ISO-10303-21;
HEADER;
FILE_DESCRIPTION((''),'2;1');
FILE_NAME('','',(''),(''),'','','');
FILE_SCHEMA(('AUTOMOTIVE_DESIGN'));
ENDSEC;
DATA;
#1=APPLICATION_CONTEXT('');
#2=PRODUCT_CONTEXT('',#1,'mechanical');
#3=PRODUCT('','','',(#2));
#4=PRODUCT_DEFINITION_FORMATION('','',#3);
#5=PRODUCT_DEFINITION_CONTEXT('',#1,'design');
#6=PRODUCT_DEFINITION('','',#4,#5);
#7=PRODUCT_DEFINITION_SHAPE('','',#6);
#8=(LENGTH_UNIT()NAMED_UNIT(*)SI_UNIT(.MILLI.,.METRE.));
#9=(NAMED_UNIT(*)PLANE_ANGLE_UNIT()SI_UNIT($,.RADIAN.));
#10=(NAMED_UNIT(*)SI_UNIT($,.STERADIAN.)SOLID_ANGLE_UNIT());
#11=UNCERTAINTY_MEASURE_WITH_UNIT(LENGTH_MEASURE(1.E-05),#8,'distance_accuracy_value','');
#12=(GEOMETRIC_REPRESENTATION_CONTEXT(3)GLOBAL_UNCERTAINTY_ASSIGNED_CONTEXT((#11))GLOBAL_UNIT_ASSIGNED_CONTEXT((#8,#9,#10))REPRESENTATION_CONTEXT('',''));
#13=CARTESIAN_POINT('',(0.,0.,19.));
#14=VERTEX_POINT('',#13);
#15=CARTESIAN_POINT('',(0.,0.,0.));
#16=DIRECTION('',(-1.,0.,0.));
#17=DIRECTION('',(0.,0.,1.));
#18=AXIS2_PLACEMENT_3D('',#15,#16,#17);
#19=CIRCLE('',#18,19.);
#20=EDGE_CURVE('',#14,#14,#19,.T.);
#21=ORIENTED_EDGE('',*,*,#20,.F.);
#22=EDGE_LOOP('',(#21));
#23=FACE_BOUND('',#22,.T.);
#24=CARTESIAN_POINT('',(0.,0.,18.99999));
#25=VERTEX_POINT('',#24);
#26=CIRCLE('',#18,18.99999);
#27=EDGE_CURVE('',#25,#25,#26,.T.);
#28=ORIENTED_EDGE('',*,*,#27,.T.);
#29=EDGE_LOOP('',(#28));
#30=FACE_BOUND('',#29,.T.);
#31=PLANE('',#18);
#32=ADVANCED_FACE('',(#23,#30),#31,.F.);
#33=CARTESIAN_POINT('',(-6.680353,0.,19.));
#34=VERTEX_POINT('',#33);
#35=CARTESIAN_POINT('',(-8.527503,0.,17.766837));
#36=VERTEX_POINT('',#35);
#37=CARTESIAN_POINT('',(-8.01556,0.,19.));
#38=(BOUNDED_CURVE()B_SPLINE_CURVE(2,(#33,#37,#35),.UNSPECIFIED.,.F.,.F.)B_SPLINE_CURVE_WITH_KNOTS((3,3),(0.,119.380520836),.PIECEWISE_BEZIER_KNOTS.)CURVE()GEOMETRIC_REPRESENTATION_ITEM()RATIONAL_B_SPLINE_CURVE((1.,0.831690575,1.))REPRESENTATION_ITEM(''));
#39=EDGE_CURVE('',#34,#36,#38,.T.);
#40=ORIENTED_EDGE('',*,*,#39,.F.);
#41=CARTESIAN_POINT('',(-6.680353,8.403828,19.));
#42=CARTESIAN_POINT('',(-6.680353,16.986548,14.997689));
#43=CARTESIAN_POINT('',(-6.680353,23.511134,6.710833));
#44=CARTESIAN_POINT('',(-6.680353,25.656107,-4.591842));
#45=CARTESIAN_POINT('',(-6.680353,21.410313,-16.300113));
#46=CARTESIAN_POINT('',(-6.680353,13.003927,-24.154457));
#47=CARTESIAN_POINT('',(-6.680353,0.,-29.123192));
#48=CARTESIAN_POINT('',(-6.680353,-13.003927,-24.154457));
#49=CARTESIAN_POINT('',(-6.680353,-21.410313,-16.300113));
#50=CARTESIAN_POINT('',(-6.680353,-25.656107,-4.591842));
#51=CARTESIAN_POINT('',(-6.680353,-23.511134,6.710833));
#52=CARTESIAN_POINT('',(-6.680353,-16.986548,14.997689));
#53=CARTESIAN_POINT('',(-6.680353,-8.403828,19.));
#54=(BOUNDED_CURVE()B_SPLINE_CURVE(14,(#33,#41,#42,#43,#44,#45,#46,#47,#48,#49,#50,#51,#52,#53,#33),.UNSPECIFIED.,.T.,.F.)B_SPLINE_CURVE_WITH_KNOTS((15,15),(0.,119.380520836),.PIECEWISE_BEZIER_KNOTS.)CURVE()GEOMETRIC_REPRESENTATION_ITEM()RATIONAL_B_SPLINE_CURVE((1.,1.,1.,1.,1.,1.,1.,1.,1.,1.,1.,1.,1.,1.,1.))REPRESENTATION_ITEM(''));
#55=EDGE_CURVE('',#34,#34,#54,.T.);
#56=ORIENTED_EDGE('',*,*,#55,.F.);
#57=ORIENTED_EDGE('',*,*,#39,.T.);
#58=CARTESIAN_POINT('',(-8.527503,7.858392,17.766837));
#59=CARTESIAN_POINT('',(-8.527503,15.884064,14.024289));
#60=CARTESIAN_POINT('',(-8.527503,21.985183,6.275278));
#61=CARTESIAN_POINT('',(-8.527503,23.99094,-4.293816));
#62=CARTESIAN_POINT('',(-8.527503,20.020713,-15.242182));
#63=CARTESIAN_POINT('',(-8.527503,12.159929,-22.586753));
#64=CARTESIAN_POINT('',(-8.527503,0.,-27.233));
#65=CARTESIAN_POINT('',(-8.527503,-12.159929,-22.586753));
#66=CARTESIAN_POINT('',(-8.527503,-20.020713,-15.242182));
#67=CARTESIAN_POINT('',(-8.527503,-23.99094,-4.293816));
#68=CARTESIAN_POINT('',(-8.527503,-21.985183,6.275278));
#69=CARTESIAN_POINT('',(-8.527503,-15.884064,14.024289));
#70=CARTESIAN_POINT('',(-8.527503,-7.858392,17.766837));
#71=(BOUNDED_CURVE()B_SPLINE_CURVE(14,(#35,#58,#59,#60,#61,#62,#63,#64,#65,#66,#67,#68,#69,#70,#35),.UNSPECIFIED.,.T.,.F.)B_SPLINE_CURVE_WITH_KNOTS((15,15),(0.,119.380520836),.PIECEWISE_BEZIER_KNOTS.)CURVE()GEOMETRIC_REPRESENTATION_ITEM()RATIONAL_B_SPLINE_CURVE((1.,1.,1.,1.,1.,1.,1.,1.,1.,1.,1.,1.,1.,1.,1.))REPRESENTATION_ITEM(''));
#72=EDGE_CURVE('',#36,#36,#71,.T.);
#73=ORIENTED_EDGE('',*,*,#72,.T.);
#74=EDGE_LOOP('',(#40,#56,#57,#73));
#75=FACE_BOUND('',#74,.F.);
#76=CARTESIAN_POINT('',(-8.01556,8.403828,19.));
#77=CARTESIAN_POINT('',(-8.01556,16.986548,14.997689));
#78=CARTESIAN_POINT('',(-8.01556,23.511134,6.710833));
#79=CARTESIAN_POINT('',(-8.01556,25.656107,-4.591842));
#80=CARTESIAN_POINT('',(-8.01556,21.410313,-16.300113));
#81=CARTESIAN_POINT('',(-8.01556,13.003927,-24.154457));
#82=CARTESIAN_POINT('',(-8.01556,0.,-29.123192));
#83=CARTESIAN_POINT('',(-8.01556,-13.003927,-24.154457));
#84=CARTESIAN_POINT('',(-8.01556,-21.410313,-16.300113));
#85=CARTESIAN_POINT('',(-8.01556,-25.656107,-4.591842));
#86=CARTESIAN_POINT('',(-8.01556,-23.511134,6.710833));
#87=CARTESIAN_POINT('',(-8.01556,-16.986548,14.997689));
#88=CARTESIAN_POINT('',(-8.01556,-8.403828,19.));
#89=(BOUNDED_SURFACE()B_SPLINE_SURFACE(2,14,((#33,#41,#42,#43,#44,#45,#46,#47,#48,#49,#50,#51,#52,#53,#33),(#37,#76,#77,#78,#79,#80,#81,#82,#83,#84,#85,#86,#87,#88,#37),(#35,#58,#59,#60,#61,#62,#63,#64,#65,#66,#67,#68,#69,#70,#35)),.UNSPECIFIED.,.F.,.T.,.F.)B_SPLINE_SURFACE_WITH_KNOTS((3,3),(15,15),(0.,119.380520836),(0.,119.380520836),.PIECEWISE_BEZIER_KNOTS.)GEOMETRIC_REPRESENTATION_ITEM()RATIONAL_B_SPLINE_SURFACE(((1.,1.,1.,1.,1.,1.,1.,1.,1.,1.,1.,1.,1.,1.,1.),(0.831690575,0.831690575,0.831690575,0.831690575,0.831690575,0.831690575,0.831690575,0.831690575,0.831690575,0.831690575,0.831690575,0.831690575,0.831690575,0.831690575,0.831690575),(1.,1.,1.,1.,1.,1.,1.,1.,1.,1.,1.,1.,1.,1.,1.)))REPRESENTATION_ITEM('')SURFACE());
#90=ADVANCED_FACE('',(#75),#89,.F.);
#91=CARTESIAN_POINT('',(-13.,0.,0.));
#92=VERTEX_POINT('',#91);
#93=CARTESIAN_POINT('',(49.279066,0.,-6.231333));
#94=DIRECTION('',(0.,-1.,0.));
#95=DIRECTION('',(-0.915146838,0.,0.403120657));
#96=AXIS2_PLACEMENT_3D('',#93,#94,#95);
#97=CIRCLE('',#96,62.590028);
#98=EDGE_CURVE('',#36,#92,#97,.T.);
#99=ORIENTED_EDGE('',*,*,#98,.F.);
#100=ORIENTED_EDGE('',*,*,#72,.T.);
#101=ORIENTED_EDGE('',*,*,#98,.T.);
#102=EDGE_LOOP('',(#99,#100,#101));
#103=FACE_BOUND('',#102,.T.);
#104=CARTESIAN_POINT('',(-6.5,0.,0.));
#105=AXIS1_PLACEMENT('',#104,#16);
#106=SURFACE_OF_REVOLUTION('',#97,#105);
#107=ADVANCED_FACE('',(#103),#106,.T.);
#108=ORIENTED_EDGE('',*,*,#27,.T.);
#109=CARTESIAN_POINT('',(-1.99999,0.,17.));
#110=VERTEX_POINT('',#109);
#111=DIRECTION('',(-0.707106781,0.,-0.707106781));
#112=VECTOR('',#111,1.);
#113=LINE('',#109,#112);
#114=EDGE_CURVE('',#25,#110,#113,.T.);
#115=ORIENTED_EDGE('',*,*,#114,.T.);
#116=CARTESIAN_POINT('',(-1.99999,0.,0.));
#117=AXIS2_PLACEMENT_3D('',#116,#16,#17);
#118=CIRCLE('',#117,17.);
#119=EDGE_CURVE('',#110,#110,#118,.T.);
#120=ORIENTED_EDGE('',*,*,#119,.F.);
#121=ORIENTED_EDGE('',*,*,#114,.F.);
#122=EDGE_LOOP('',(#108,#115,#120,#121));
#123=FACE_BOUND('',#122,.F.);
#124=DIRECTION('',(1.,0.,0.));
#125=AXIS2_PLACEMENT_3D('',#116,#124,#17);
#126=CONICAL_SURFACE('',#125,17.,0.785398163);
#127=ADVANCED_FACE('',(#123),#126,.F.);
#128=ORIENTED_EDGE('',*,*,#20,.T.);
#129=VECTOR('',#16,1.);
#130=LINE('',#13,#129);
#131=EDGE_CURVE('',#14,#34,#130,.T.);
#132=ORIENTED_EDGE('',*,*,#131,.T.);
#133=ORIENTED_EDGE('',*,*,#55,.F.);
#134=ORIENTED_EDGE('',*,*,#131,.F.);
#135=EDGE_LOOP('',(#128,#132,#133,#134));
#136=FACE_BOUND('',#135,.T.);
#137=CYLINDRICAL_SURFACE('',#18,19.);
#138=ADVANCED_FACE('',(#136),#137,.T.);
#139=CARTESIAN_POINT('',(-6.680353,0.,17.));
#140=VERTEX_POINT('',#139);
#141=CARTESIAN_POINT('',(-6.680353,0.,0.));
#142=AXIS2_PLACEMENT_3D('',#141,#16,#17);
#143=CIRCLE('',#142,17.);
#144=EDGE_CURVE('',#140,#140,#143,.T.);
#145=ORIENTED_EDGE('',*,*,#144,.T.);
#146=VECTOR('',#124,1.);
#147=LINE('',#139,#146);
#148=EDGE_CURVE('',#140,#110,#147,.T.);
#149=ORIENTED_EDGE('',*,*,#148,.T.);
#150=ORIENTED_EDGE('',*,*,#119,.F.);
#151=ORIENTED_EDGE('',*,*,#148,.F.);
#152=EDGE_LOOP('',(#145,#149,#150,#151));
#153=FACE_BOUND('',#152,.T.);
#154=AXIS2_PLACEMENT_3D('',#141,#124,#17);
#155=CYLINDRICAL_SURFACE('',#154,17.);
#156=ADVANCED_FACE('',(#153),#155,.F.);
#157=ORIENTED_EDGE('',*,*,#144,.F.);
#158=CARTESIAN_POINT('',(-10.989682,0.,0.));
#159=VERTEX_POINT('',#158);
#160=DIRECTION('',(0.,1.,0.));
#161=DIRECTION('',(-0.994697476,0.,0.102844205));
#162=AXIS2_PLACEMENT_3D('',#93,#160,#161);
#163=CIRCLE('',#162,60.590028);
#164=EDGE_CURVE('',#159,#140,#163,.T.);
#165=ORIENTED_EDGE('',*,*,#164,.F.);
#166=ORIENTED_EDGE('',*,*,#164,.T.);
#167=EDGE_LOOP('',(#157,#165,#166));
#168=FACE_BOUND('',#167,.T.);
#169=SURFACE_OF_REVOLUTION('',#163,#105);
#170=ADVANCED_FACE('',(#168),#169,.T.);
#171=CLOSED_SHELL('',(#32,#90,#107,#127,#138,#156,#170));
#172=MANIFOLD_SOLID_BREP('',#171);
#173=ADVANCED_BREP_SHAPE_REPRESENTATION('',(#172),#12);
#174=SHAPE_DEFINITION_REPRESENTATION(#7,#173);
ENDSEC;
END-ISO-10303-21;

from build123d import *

# Parameters (mm, degrees)
F2_R    = 2
F3_SIZE = 1.99999


# Not quite as in the source:
# - a fillet or chamfer is up to 0.001 mm smaller than in the source, because OpenCascade refuses the exact size


with BuildPart() as f1:
    # F0 (on Front) → F1 (revolve)
    with BuildSketch(Plane.XZ):
        with BuildLine():
            Line((-13, 0), (-10.9896817121, 0))
            ThreePointArc((-10.9896817121, 0), (-9.4533501693, 8.6567410673), (-6.6803534332, 17))
            Line((-6.6803534332, 17), (0, 17))
            Line((0, 17), (0, 19))
            Line((0, 19), (-8, 19))
            ThreePointArc((-8, 19), (-11.2501561273, 9.6974095072), (-13, 0))
        make_face()
    revolve(axis=Axis((-6.5, 0, 0), (-1, 0, 0)))

    # F2
    f2_edges = [f1.edges().sort_by_distance(p)[0] for p in [
        (-8, 0, -19),
    ]]
    fillet(f2_edges, radius=F2_R)

    # F3 (size 2 in the source; OpenCascade refuses exactly that, so slightly less here)
    f3_edges = [f1.edges().sort_by_distance(p)[0] for p in [
        (0, 0, -17),
    ]]
    chamfer(f3_edges, length=F3_SIZE)


solid = f1.part
